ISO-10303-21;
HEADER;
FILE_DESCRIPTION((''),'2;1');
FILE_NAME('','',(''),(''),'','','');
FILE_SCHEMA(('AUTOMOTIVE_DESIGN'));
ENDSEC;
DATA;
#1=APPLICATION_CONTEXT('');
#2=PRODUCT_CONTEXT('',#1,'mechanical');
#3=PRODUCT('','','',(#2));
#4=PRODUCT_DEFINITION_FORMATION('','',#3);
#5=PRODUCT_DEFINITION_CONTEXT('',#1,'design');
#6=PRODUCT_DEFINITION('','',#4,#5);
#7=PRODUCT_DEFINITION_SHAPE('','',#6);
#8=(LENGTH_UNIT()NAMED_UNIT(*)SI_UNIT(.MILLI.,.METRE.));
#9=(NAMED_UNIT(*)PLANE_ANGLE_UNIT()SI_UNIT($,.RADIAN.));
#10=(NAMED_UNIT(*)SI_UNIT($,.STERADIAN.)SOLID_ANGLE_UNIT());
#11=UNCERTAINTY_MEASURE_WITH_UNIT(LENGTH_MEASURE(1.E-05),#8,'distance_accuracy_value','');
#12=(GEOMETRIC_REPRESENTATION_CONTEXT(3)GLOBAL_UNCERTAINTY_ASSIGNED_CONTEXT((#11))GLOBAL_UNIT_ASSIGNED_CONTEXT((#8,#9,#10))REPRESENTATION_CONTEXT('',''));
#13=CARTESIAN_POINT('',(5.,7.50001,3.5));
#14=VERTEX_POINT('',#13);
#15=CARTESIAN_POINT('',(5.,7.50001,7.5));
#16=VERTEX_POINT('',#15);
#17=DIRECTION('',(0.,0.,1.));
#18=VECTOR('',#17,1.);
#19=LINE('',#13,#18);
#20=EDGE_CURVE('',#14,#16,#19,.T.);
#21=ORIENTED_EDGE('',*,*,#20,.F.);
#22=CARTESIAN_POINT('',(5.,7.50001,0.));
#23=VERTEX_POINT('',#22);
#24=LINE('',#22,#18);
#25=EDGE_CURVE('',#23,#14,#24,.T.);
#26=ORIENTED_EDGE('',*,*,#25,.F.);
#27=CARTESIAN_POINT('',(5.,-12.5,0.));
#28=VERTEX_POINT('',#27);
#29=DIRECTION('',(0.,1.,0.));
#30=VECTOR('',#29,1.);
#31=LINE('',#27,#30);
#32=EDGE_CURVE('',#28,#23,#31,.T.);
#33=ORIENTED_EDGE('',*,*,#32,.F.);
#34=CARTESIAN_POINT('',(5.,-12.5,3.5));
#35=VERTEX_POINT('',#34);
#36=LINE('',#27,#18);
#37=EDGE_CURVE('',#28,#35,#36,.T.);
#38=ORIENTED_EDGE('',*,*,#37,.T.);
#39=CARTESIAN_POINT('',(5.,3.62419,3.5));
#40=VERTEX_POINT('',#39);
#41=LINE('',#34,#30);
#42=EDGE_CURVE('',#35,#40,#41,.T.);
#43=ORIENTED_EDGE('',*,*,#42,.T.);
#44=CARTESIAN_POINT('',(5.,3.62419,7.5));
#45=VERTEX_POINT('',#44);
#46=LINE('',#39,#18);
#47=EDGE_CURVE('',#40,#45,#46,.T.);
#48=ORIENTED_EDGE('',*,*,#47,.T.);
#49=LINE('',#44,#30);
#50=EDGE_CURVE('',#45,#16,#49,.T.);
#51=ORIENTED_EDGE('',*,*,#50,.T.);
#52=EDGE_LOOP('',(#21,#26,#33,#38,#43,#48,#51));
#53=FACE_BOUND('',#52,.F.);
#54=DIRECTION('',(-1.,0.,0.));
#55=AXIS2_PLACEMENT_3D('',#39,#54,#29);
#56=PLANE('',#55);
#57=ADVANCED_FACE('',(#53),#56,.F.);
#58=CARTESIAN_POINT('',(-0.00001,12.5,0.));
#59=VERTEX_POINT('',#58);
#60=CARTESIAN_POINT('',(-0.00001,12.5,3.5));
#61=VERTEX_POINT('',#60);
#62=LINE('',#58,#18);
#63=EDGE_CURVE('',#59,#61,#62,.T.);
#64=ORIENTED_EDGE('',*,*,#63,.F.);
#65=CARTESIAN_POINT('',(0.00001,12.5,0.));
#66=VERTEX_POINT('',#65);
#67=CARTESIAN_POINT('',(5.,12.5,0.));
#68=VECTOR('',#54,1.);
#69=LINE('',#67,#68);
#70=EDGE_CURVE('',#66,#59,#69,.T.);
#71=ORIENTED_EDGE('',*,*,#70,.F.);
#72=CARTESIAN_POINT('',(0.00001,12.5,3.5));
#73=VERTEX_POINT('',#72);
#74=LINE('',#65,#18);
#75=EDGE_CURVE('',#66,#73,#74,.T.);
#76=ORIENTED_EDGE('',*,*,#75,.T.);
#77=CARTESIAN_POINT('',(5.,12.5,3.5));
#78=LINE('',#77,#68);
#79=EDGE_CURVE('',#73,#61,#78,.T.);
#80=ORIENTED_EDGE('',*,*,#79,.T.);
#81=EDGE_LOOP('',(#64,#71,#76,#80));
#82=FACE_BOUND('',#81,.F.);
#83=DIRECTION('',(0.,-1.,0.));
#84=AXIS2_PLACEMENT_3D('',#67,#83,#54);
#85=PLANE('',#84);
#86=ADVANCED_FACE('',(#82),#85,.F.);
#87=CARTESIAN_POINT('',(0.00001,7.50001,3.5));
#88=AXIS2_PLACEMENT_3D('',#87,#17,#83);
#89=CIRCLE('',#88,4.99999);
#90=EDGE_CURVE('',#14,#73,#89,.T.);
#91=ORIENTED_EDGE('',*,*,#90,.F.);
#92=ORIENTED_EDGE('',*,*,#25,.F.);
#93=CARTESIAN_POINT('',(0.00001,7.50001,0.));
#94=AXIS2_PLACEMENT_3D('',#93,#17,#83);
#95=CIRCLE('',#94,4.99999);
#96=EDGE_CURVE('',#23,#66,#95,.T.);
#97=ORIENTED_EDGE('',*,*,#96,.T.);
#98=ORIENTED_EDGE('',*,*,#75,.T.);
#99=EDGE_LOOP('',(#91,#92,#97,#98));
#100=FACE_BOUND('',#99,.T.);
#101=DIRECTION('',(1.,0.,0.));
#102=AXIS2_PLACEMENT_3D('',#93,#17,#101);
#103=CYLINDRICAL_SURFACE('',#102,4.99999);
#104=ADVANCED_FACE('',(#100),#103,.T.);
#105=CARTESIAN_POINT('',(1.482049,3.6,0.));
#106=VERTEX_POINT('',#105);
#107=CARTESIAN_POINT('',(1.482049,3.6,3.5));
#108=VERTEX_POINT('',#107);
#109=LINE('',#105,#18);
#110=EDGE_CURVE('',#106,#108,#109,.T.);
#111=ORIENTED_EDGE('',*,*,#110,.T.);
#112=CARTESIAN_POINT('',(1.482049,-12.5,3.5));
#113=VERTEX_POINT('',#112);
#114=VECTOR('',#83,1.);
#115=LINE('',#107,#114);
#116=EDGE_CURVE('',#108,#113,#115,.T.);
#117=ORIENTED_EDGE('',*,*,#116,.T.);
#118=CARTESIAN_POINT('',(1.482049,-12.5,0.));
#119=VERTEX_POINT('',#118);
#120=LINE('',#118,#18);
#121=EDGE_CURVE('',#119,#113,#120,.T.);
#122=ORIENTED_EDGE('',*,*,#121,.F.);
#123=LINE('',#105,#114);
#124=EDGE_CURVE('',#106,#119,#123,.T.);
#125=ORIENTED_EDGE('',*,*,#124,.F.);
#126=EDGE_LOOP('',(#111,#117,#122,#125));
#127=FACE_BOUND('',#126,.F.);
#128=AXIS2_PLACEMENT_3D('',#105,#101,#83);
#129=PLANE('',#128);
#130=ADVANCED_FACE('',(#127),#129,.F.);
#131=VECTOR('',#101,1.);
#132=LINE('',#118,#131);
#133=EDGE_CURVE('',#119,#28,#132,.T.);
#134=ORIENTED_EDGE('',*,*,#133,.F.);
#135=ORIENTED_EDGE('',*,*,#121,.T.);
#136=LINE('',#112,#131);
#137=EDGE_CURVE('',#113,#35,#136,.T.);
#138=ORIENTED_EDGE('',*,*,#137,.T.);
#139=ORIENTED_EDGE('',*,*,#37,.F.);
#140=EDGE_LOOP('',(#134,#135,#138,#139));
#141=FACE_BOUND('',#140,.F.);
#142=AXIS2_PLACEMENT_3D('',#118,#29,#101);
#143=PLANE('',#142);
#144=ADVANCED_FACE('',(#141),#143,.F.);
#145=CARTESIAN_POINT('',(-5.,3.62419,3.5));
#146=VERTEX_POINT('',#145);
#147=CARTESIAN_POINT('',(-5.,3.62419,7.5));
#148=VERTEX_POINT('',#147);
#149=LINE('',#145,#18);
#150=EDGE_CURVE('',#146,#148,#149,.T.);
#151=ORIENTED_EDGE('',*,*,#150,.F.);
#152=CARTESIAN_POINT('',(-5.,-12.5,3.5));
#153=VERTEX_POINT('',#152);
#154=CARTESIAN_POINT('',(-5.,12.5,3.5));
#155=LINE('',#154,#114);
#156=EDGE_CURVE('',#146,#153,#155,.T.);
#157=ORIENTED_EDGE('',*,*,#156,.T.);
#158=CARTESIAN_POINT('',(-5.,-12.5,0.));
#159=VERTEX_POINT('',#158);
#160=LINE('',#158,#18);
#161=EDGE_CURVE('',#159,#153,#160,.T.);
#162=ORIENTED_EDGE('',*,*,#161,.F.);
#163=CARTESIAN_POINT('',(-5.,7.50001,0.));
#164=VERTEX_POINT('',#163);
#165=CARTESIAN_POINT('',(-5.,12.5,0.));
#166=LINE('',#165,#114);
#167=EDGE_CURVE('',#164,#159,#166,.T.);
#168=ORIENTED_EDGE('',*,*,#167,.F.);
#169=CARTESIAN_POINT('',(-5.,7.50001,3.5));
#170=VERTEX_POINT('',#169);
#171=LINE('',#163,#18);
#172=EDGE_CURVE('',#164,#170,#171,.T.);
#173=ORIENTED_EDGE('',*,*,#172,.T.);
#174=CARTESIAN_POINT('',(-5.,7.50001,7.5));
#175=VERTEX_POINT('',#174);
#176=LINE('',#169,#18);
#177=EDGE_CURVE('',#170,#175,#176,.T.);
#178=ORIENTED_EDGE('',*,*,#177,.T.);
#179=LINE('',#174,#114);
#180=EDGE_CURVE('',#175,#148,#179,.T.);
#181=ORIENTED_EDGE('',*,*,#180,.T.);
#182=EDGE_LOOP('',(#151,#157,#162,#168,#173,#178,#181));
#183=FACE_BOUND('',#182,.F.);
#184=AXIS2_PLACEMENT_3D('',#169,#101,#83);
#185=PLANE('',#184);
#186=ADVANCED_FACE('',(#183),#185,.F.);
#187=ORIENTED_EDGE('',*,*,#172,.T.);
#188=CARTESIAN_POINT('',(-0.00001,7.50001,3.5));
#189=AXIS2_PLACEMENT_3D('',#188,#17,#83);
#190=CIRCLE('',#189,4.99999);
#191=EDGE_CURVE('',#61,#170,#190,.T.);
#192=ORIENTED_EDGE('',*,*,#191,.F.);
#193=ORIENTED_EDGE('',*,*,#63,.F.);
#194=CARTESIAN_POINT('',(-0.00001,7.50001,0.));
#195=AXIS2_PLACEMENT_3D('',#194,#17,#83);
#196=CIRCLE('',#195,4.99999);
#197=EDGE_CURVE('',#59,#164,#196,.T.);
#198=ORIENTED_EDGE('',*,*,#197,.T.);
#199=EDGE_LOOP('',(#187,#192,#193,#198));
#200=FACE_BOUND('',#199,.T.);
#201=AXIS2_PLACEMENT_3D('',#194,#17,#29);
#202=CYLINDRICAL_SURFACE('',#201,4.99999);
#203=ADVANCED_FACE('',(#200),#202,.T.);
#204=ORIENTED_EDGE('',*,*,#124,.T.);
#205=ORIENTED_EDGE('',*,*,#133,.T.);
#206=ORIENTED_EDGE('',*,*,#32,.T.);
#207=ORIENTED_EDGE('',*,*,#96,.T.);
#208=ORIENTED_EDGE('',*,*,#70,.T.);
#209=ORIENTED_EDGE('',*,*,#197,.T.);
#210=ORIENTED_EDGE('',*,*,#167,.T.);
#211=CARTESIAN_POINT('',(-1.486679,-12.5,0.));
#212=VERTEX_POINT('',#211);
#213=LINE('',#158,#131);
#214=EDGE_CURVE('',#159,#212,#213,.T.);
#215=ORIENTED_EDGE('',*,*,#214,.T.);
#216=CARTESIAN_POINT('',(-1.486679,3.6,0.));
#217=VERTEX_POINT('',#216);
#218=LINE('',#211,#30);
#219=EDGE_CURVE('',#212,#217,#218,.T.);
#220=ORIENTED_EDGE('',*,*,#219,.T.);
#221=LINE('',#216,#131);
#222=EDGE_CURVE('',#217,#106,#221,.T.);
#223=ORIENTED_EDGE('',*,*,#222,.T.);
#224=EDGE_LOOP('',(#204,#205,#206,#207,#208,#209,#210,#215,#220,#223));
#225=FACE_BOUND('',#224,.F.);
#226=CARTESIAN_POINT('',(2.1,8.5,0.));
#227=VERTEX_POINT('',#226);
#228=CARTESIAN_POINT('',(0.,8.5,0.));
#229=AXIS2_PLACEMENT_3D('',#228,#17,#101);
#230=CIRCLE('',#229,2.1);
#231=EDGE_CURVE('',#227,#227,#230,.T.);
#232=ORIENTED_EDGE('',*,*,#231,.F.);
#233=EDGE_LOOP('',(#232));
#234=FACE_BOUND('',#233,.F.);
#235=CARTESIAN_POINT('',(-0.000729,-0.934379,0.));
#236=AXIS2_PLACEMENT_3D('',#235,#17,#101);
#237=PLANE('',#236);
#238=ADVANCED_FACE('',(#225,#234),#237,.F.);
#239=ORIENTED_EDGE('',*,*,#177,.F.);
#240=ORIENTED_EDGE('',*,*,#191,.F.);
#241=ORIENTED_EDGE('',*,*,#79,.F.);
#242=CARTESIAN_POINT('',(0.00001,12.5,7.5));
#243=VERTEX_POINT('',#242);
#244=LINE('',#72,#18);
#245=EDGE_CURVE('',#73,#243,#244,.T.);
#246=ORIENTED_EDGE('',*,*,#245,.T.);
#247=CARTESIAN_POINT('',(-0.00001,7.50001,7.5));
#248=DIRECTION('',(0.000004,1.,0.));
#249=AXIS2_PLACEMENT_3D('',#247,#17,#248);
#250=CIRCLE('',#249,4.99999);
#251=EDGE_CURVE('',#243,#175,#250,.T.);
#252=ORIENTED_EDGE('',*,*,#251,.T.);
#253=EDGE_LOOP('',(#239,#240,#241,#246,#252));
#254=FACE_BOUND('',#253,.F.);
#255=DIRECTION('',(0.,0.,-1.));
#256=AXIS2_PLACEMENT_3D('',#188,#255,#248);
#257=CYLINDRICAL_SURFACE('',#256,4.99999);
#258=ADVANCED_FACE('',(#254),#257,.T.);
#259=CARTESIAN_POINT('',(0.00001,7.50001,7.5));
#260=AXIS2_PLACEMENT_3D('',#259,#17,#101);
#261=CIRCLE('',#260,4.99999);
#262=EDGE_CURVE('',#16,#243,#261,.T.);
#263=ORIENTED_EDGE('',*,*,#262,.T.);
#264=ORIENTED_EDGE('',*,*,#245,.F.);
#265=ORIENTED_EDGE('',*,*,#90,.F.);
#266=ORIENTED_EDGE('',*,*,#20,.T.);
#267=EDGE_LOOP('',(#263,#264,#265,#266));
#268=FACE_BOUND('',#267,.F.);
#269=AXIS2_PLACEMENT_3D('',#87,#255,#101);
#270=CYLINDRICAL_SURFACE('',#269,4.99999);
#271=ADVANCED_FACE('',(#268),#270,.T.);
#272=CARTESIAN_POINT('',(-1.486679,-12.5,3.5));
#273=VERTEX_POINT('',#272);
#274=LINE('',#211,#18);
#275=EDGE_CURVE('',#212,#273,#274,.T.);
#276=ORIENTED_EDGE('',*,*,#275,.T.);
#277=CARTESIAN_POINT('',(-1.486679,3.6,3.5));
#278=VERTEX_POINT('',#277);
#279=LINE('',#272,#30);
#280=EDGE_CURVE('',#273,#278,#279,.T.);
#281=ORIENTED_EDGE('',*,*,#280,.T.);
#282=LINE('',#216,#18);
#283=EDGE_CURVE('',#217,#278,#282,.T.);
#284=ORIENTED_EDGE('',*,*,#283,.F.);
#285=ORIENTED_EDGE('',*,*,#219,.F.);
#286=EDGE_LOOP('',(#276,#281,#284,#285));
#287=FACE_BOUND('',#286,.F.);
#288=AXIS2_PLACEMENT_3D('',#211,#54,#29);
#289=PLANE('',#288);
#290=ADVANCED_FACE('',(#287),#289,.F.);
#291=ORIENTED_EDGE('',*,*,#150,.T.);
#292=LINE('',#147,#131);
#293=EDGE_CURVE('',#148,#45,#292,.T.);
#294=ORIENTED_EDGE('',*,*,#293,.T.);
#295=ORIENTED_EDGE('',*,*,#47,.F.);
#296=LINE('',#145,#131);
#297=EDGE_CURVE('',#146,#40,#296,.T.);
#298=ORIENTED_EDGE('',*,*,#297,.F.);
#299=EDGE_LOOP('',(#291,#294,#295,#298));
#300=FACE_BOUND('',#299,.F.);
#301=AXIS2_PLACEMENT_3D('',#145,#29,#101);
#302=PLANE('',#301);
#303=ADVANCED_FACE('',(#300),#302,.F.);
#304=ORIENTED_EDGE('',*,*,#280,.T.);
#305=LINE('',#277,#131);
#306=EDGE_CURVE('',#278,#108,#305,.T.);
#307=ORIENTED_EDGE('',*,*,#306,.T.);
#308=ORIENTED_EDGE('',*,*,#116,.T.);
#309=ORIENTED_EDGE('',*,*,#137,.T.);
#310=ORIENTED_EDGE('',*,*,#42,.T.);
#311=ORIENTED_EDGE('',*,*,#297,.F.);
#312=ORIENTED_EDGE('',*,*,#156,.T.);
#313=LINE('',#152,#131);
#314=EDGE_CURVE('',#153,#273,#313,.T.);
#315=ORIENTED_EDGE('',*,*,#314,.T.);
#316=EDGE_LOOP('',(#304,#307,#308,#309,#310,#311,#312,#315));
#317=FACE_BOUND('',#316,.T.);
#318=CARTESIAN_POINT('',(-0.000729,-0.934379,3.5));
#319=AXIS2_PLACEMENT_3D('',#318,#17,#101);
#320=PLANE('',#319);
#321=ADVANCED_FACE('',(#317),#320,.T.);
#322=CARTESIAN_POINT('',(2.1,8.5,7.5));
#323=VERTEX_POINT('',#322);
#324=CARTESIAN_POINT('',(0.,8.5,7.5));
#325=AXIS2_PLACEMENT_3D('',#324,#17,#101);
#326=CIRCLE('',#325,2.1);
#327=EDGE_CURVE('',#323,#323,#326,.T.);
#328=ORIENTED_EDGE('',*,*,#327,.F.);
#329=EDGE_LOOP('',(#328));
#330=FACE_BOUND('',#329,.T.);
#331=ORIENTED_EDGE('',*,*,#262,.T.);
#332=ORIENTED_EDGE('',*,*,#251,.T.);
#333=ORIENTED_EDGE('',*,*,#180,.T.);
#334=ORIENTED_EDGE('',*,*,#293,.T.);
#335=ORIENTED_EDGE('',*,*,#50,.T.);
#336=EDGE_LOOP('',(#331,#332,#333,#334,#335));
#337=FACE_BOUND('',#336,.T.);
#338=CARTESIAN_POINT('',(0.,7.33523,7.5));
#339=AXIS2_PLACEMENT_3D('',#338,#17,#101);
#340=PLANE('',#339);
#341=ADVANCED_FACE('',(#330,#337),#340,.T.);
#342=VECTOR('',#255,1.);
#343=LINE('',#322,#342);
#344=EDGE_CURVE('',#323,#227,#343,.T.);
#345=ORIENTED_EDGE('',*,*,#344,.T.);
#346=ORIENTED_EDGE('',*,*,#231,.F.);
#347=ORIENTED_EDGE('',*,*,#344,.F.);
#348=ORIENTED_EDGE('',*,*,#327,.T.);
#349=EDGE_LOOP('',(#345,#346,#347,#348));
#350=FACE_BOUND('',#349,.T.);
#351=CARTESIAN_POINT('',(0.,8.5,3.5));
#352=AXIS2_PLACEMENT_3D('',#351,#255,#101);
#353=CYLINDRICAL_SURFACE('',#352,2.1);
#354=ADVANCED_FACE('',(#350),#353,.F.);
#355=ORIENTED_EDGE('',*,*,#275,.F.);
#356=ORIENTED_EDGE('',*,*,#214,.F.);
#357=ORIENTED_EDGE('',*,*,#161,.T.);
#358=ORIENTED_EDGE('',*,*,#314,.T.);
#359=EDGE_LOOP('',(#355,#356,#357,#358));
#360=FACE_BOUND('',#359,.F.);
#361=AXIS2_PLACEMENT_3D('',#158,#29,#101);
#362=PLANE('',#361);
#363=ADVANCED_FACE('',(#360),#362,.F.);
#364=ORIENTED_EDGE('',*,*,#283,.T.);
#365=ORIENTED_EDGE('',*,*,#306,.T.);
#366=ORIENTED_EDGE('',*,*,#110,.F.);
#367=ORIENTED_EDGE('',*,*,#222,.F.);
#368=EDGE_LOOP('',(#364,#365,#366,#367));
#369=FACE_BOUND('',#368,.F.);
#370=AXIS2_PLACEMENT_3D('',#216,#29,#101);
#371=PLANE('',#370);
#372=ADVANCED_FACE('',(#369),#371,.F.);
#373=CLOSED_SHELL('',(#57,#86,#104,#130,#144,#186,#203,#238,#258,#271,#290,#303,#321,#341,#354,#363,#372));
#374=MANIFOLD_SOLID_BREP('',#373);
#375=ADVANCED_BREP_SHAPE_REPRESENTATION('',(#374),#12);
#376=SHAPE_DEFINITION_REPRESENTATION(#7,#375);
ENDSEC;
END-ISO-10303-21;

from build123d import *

# Parameters (mm, degrees)
F0_R     = 2.1
F1_DEPTH = 3.5
F2_R     = 4.99999
F3_R     = 2.1
F4_DEPTH = 4


# Not quite as in the source:
# - a fillet or chamfer is up to 0.001 mm smaller than in the source, because OpenCascade refuses the exact size
# - ends of sketch curves that miss each other by under 0.0002 mm in the source are joined


with BuildPart() as f1:
    # F0 (on Top) → F1 (new body)
    with BuildSketch(Plane.XY):
        Polygon((1.4820488868, -12.5), (5, -12.5), (5, 12.5), (-5, 12.5), (-5, -12.5), (-1.4866787242, -12.5), (-1.4866787242, 3.6), (1.4820488868, 3.6), align=None)
        with Locations((0, 8.5)):
            Circle(F0_R, mode=Mode.SUBTRACT)
    extrude(amount=F1_DEPTH)

    # F2 (radius 5 in the source; OpenCascade refuses exactly that, so slightly less here)
    f2_edges = [f1.edges().sort_by_distance(p)[0] for p in [
        (-5, 12.5, 1.75),
        (5, 12.5, 1.75),
    ]]
    fillet(f2_edges, radius=F2_R)

    # F3 (on face) → F4 (join)
    with BuildSketch(Plane.XY.offset(3.5)):
        with BuildLine():
            Line((-5, 3.6241896451), (0, 3.6241896451))
            Line((0, 3.6241896451), (5, 3.6241896451))
            Line((5, 3.6241896451), (5, 7.50001))
            ThreePointArc((5, 7.50001), (3.5355368349, 11.0355368349), (1e-05, 12.5))
            ThreePointArc((1e-05, 12.5), (-3.5355368349, 11.0355368349), (-5, 7.50001))
            Line((-5, 7.50001), (-5, 3.6241896451))
        make_face()
        with Locations((0, 8.5)):
            Circle(F3_R, mode=Mode.SUBTRACT)
    extrude(amount=F4_DEPTH)


solid = f1.part
